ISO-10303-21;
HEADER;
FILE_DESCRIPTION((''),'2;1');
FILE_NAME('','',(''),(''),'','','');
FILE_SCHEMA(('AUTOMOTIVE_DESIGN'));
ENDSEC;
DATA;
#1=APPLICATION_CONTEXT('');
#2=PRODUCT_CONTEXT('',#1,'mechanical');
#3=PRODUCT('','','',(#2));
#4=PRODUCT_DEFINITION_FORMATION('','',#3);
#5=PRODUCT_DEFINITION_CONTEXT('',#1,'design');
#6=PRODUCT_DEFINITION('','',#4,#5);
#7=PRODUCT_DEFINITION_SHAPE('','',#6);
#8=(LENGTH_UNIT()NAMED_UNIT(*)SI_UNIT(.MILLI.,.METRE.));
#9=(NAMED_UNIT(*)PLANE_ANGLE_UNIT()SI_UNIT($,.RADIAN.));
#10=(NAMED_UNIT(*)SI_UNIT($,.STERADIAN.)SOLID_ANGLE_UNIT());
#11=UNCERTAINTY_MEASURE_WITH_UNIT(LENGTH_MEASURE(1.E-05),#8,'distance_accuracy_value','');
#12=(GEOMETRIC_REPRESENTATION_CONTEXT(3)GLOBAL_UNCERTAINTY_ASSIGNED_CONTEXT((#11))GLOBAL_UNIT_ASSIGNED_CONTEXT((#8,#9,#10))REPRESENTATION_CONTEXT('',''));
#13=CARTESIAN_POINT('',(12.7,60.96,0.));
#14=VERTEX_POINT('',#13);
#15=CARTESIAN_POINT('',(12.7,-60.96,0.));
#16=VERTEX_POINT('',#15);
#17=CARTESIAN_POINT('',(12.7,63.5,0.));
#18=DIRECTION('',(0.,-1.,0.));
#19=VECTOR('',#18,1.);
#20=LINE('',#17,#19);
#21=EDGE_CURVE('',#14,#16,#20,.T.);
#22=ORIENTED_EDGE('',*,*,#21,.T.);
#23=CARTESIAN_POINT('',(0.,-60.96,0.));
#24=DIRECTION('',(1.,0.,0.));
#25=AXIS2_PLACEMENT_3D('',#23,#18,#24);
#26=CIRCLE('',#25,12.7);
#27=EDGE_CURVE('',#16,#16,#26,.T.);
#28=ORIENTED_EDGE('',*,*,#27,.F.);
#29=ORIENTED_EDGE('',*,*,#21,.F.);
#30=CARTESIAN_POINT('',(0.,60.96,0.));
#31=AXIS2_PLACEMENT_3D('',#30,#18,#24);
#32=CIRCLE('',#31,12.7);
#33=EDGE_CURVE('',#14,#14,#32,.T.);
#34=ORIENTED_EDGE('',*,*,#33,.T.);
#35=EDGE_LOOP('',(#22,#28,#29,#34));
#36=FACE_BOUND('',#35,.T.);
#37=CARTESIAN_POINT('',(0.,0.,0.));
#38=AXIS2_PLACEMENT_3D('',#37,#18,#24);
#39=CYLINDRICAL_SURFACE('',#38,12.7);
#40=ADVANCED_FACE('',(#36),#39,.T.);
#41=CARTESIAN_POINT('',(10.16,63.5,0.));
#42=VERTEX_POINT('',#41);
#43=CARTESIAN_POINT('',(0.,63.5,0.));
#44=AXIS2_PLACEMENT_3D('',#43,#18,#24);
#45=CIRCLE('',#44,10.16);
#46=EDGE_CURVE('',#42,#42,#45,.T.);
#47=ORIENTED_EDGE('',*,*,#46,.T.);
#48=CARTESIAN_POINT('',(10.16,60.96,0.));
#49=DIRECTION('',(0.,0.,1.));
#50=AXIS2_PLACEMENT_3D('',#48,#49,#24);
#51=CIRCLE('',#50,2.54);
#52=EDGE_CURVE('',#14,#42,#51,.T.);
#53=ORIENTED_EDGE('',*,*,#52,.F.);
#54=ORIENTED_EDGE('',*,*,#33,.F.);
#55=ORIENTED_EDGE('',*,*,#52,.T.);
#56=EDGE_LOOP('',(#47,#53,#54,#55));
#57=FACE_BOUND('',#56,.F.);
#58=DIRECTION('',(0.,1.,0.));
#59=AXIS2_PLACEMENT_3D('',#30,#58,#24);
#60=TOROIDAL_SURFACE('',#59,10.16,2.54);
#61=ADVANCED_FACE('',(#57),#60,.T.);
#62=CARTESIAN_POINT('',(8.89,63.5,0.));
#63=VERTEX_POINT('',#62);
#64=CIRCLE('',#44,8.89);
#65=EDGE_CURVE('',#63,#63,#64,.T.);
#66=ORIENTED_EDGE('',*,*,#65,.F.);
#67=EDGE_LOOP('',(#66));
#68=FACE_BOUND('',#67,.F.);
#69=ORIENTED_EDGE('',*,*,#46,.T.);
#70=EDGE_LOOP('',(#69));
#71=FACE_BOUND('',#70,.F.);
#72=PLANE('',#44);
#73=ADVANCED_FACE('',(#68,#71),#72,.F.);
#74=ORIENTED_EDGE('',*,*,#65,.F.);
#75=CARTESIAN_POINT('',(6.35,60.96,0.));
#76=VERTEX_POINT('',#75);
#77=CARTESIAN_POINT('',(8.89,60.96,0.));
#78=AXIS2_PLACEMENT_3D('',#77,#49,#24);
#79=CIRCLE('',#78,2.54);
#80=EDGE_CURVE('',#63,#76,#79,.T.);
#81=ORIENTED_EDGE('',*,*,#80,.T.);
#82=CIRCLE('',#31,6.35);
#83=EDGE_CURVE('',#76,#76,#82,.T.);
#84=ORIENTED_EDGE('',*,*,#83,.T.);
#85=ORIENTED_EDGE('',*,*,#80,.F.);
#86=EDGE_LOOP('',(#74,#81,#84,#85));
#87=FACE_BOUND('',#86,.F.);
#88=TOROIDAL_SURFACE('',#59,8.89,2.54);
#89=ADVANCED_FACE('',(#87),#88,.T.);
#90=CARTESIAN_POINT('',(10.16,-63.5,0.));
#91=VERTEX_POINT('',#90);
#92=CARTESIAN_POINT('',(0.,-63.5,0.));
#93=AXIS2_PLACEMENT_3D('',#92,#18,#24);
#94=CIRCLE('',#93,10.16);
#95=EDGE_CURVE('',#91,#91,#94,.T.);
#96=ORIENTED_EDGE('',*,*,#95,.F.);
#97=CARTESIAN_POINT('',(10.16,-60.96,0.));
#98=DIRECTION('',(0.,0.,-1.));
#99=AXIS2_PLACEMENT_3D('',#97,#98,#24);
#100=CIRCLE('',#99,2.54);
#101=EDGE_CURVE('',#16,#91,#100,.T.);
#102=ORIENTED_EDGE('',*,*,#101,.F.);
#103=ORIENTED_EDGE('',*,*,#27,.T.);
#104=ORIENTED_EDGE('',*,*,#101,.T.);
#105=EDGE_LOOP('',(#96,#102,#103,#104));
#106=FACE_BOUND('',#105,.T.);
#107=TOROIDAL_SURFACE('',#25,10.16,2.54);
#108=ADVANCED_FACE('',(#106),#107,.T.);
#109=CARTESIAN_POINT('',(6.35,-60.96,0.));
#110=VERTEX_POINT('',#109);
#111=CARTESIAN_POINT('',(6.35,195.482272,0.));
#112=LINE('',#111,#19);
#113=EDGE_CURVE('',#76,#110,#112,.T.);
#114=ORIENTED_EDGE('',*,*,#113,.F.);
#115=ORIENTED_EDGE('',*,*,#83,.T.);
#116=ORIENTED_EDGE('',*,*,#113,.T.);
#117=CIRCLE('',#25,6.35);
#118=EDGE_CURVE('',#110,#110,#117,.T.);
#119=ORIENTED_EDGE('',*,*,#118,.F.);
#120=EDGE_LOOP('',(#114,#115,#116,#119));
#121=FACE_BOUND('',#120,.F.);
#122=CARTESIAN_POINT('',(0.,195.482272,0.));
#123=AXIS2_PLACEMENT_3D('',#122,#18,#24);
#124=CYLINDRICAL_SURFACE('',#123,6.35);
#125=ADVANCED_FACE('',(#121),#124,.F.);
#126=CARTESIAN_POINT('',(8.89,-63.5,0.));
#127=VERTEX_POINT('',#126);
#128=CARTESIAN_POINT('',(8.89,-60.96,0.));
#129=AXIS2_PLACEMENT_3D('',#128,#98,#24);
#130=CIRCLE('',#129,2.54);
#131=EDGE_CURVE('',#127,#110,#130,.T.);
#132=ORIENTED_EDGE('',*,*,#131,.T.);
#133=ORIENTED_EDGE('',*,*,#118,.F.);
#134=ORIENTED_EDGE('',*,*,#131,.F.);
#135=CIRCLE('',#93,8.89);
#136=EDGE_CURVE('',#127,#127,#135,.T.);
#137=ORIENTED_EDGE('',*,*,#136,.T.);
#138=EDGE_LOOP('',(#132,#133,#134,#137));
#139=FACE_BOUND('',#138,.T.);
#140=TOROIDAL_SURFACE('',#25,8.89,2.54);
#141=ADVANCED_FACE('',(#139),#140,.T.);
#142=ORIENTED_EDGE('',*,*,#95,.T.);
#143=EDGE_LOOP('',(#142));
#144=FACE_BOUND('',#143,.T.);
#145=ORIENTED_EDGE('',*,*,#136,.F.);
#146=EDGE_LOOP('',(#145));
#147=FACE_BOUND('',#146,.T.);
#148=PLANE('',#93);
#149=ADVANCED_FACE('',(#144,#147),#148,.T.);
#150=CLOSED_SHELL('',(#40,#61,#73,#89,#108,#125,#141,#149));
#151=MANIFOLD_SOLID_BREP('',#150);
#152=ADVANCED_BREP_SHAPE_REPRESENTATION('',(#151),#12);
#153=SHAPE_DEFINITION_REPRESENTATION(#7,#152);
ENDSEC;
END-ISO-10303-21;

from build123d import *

# Parameters (mm, degrees)
F0_R     = 12.7
F1_DEPTH = 63.5
F3_D     = 12.7
F4_R     = 2.54


with BuildPart() as f1:
    # F0 (on Front) → F1 (new body, symmetric)
    with BuildSketch(Plane.XZ):
        Circle(F0_R)
    extrude(amount=F1_DEPTH, both=True)

    # F3 (through all)
    with Locations(Plane(origin=(0, 63.5, 0), x_dir=(-1, 0, 0), z_dir=(0, 1, 0))):
        with Locations((0, 0)):
            Hole(F3_D / 2)

    # F4
    f4_edges = [f1.edges().sort_by_distance(p)[0] for p in [
        (-12.7, -63.5, 0),
        (-12.7, 63.5, 0),
        (6.35, 63.5, 0),
        (6.35, -63.5, 0),
    ]]
    fillet(f4_edges, radius=F4_R)


solid = f1.part
